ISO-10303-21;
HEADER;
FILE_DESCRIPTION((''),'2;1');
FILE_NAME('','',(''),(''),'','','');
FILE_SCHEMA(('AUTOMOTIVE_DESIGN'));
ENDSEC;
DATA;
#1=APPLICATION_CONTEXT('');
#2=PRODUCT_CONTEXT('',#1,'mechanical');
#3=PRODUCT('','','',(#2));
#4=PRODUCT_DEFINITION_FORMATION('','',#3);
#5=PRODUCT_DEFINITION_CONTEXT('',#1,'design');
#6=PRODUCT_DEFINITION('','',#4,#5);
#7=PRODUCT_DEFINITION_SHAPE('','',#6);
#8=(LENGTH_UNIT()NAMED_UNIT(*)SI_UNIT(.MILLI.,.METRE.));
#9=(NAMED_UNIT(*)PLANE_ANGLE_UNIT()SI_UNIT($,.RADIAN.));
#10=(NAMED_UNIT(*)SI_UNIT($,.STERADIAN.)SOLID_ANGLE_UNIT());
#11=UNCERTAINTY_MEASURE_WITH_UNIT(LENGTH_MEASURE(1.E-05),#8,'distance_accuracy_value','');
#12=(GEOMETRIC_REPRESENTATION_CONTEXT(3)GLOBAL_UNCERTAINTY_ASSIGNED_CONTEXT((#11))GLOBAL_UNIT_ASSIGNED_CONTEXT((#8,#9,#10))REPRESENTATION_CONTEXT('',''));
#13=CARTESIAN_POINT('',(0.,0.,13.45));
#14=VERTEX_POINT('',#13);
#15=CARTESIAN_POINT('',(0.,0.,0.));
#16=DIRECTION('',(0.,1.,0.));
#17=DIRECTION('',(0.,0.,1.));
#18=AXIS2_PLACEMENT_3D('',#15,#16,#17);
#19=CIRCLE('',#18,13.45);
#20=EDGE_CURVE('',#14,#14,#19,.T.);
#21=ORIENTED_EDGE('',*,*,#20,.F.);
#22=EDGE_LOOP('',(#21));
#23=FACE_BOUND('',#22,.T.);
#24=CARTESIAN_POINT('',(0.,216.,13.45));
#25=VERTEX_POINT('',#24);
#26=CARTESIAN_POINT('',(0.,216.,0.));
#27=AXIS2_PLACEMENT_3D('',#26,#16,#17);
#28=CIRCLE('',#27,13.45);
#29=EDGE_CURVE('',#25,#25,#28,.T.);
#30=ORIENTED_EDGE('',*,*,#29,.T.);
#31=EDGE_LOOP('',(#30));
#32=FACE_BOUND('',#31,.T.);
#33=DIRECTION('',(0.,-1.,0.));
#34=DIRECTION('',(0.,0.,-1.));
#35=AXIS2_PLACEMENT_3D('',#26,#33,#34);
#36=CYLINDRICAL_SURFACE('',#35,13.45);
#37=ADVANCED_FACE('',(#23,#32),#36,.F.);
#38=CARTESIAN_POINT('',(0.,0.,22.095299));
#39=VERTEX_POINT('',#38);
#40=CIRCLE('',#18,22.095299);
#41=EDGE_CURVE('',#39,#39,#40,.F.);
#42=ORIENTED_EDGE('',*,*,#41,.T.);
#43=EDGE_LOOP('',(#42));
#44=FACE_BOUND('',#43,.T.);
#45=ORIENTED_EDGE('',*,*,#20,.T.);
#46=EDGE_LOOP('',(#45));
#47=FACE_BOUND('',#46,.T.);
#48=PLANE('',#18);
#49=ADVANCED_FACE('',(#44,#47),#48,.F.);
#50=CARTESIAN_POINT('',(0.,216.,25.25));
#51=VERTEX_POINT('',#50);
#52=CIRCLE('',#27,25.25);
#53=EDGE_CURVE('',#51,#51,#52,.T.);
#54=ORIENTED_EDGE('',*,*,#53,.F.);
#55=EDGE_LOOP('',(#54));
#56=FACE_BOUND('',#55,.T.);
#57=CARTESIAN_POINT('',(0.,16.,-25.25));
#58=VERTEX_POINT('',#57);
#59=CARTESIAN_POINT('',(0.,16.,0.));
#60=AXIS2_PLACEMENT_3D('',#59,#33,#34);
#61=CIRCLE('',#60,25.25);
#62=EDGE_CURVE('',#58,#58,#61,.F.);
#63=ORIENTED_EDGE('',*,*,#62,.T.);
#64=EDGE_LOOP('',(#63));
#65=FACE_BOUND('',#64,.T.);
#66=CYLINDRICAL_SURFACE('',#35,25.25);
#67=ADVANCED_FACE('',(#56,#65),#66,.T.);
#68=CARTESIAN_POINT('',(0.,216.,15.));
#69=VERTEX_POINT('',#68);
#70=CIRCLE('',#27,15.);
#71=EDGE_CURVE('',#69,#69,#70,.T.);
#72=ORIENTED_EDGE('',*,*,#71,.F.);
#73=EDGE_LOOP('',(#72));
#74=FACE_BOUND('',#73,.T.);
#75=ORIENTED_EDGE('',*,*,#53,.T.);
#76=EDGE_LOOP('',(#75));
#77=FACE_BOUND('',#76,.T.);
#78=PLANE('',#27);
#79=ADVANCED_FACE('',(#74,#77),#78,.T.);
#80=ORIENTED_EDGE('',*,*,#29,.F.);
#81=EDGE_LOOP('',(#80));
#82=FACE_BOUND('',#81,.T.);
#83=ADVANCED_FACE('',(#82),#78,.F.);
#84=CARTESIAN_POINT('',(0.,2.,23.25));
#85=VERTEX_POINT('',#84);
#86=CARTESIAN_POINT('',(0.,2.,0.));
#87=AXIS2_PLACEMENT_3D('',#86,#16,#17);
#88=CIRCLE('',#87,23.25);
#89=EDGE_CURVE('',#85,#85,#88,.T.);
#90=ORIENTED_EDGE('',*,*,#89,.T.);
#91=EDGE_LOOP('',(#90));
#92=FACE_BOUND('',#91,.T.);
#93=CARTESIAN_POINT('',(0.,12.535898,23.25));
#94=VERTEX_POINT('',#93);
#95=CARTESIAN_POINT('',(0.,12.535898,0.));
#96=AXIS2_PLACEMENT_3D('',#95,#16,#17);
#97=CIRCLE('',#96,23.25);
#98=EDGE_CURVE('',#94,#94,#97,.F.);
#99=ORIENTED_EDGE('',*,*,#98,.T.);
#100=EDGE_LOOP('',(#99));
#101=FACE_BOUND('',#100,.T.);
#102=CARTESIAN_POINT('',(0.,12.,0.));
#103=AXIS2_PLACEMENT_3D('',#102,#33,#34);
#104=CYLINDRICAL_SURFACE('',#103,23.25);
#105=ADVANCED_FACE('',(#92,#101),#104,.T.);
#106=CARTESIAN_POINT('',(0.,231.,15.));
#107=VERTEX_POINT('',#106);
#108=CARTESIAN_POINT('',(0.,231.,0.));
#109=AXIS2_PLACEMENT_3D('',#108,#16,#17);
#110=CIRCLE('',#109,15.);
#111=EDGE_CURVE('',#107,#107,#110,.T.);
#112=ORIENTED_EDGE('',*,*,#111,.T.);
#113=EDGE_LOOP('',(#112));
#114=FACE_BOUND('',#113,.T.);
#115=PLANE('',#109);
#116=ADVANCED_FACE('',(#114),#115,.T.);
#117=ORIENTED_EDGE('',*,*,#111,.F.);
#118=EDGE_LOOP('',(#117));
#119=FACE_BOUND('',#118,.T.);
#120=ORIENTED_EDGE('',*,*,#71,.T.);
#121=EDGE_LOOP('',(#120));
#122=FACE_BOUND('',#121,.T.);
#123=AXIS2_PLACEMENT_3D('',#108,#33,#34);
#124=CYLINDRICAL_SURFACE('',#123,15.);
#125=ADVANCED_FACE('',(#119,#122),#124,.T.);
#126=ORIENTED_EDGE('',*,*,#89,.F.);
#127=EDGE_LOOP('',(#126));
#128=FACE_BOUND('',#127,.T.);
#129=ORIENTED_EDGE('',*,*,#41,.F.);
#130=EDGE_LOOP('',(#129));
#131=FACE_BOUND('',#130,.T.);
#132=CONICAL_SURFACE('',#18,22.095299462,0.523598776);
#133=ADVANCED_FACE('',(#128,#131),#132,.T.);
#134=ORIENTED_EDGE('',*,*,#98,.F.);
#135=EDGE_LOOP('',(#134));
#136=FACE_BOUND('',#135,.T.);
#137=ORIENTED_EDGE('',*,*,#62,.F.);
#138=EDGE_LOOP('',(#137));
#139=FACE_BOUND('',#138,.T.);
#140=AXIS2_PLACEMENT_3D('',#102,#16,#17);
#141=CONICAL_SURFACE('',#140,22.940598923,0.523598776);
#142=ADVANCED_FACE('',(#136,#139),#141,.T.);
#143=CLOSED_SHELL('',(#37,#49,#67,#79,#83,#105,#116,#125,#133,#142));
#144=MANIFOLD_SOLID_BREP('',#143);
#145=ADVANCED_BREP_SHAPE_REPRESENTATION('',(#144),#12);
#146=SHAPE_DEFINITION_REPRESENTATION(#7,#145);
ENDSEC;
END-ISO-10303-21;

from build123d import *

# Parameters (mm, degrees)
SKETCH1_R           = 25.25
SKETCH1_R_2         = 13.45
BOSS_EXTRUDE1_DEPTH = 216
SKETCH2_OUTSIDE_W   = 98
SKETCH2_OUTSIDE_H   = 98
SKETCH2_OUTSIDE_R   = 23.25
CUT_EXTRUDE1_DEPTH  = 12
CHAMFER2_SIZE       = 4
CHAMFER2_SIZE_2     = 2.309401077
CHAMFER3_SIZE       = 2
CHAMFER3_SIZE2      = 1.154700538
SKETCH3_R           = 15
INSIDE_HEAD_DEPTH   = 15


with BuildPart() as part:
    # Sketch1 → Boss-Extrude1 (new body)
    with BuildSketch(Plane(origin=(0, 0, 0), x_dir=(1, 0, 0), z_dir=(0, 1, 0))):
        with Locations(Location((0, 0, 0), (0, 0, 270))):
            Circle(SKETCH1_R)
        with Locations(Location((0, 0, 0), (0, 0, 270))):
            Circle(SKETCH1_R_2, mode=Mode.SUBTRACT)
    extrude(amount=BOSS_EXTRUDE1_DEPTH)

    # Sketch2 outside → Cut-Extrude1 (cut)
    with BuildSketch(Plane.XZ):
        Rectangle(SKETCH2_OUTSIDE_W, SKETCH2_OUTSIDE_H)
        with Locations(Location((0, 0, 0), (0, 0, 270))):
            Circle(SKETCH2_OUTSIDE_R, mode=Mode.SUBTRACT)
    extrude(amount=-CUT_EXTRUDE1_DEPTH, mode=Mode.SUBTRACT)

    # Chamfer2
    # the kernel refuses this chamfer: 4, 2.309401077 mm, written as the material it takes off along each edge
    with BuildSketch(Plane(origin=(0, 12, 0), x_dir=(0, 0, 1), z_dir=(1, 0, 0))) as chamfer2_piece_1_section:
        Polygon((25.25, -CHAMFER2_SIZE), (25.25 - CHAMFER2_SIZE_2, 0), (25.25, 0), align=None)
    chamfer2_piece_1 = revolve(axis=Axis((0, 12, 0), (0, -1, 0)), mode=Mode.PRIVATE)
    chamfer2_piece_1 = chamfer2_piece_1 - Plane(origin=(0, 14.291094123, 0), x_dir=(0, 0, -1), z_dir=(0, -1, 0)) * Cylinder(23.25, 101, mode=Mode.PRIVATE)
    add(chamfer2_piece_1, mode=Mode.SUBTRACT)

    # Chamfer3
    chamfer3_edges = [part.edges().sort_by_distance(p)[0] for p in [
        (0, 0, 23.25),
    ]]
    chamfer3_side = [part.faces().sort_by_distance(p)[0] for p in [
        (0, 6.267949193, 23.25),
    ]]
    chamfer(chamfer3_edges, length=CHAMFER3_SIZE, length2=CHAMFER3_SIZE2, reference=chamfer3_side[0])

    # Sketch3 → inside_head (add)
    with BuildSketch(Plane(origin=(0, 216, 0), x_dir=(1, 0, 0), z_dir=(0, 1, 0))):
        with Locations(Location((0, 0, 0), (0, 0, 270))):
            Circle(SKETCH3_R)
    extrude(amount=INSIDE_HEAD_DEPTH)


solid = part.part
